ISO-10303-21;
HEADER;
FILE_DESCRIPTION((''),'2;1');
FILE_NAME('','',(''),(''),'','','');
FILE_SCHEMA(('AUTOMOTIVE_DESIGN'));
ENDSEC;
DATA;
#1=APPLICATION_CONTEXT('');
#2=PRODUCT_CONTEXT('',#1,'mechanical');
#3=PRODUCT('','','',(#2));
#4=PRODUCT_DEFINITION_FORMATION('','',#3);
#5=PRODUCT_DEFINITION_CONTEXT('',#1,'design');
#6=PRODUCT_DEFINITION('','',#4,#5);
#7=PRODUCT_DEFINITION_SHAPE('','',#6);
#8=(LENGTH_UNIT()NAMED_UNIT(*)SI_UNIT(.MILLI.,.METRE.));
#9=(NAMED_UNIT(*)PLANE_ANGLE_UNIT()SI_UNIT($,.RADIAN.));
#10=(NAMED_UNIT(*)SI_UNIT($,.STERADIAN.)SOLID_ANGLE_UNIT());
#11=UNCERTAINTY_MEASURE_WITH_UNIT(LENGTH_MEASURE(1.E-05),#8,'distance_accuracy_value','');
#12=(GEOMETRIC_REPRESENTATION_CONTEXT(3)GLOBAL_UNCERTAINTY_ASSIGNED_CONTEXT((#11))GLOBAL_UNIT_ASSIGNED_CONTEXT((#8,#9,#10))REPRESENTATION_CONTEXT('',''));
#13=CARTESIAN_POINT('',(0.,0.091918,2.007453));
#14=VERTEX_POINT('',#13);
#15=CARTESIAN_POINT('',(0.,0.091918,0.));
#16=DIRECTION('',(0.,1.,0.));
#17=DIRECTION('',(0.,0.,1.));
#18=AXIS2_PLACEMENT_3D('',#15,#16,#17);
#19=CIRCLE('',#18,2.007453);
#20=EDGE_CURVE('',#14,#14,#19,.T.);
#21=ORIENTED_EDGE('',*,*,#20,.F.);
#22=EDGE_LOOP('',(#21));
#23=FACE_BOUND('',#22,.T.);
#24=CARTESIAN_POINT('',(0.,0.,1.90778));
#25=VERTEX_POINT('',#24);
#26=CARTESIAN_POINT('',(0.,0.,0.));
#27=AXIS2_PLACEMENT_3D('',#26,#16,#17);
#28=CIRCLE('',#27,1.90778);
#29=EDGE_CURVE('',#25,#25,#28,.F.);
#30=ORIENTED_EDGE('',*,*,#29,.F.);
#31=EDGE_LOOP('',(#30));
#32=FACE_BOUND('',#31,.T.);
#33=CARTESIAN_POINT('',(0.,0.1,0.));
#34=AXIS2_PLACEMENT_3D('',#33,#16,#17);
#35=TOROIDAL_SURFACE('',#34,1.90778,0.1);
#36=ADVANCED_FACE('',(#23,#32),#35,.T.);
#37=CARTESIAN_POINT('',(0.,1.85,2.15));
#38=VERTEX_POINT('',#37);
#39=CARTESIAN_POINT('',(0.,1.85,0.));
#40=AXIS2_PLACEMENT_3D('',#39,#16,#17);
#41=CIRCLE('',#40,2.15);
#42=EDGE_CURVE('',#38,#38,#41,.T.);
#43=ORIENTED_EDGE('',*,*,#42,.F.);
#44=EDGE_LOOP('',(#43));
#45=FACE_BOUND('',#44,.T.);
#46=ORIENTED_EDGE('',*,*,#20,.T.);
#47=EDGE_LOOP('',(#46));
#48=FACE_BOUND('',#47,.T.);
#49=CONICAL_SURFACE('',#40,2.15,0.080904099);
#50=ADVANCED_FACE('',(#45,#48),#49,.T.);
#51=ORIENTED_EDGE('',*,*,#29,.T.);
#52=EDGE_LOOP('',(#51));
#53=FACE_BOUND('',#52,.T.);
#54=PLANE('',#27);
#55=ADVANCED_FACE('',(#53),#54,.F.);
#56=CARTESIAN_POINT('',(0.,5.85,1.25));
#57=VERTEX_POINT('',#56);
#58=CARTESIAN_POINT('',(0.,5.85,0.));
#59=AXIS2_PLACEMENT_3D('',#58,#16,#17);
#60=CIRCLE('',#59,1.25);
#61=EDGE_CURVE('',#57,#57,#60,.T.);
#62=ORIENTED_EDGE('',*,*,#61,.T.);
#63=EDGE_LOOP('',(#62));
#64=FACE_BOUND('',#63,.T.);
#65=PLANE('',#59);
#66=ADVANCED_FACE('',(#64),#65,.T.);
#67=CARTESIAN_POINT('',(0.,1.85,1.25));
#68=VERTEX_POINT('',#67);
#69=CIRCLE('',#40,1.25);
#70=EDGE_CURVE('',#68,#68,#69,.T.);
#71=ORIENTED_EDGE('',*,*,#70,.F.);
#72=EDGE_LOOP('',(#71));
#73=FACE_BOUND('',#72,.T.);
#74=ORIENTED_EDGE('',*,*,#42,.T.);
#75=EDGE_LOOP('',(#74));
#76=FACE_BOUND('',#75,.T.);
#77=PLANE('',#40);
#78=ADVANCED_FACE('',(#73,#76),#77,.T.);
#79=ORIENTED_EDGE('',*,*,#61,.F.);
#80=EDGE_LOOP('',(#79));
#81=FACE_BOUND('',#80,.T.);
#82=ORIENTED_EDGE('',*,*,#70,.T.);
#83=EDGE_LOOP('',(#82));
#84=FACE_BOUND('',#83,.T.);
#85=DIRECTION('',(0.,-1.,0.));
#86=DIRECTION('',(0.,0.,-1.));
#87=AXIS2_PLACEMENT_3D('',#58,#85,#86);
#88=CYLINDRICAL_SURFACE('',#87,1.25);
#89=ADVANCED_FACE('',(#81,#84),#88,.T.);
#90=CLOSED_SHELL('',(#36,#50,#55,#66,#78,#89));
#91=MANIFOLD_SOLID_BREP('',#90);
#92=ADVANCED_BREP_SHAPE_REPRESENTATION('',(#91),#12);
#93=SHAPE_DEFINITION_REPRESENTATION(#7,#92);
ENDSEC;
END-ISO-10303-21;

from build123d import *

# Parameters (mm, degrees)
ESQUISSE1_R        = 2.15
BOSS_EXTRU_1_DEPTH = 1.85
ESQUISSE2_R        = 1.25
BOSS_EXTRU_2_DEPTH = 4
CHANFREIN1_SIZE    = 1.85
CHANFREIN1_SIZE_2  = 0.15
CONG_1_R           = 0.1


with BuildPart() as part:
    # Esquisse1 → Boss.-Extru.1 (new body)
    with BuildSketch(Plane(origin=(0, 0, 0), x_dir=(1, 0, 0), z_dir=(0, 1, 0))):
        with Locations(Location((0, 0, 0), (0, 0, 270))):
            Circle(ESQUISSE1_R)
    extrude(amount=BOSS_EXTRU_1_DEPTH)

    # Esquisse2 → Boss.-Extru.2 (add)
    with BuildSketch(Plane(origin=(0, 1.85, 0), x_dir=(1, 0, 0), z_dir=(0, 1, 0))):
        with Locations(Location((0, 0, 0), (0, 0, 270))):
            Circle(ESQUISSE2_R)
    extrude(amount=BOSS_EXTRU_2_DEPTH)

    # Chanfrein1
    # the kernel refuses this chamfer: 1.85, 0.15 mm, written as the material it takes off along each edge
    with BuildSketch(Plane(origin=(0, 0, 0), x_dir=(0, 0, 1), z_dir=(-1, 0, 0))) as chanfrein1_piece_1:
        Polygon((2.15, CHANFREIN1_SIZE), (2.15 - CHANFREIN1_SIZE_2, 0), (2.15, 0), align=None)
    revolve(axis=Axis((0, 0, 0), (0, 1, 0)), mode=Mode.SUBTRACT)

    # Congé1
    cong_1_edges = [part.edges().sort_by_distance(p)[0] for p in [
        (0, 0, -2),
    ]]
    fillet(cong_1_edges, radius=CONG_1_R)


solid = part.part
